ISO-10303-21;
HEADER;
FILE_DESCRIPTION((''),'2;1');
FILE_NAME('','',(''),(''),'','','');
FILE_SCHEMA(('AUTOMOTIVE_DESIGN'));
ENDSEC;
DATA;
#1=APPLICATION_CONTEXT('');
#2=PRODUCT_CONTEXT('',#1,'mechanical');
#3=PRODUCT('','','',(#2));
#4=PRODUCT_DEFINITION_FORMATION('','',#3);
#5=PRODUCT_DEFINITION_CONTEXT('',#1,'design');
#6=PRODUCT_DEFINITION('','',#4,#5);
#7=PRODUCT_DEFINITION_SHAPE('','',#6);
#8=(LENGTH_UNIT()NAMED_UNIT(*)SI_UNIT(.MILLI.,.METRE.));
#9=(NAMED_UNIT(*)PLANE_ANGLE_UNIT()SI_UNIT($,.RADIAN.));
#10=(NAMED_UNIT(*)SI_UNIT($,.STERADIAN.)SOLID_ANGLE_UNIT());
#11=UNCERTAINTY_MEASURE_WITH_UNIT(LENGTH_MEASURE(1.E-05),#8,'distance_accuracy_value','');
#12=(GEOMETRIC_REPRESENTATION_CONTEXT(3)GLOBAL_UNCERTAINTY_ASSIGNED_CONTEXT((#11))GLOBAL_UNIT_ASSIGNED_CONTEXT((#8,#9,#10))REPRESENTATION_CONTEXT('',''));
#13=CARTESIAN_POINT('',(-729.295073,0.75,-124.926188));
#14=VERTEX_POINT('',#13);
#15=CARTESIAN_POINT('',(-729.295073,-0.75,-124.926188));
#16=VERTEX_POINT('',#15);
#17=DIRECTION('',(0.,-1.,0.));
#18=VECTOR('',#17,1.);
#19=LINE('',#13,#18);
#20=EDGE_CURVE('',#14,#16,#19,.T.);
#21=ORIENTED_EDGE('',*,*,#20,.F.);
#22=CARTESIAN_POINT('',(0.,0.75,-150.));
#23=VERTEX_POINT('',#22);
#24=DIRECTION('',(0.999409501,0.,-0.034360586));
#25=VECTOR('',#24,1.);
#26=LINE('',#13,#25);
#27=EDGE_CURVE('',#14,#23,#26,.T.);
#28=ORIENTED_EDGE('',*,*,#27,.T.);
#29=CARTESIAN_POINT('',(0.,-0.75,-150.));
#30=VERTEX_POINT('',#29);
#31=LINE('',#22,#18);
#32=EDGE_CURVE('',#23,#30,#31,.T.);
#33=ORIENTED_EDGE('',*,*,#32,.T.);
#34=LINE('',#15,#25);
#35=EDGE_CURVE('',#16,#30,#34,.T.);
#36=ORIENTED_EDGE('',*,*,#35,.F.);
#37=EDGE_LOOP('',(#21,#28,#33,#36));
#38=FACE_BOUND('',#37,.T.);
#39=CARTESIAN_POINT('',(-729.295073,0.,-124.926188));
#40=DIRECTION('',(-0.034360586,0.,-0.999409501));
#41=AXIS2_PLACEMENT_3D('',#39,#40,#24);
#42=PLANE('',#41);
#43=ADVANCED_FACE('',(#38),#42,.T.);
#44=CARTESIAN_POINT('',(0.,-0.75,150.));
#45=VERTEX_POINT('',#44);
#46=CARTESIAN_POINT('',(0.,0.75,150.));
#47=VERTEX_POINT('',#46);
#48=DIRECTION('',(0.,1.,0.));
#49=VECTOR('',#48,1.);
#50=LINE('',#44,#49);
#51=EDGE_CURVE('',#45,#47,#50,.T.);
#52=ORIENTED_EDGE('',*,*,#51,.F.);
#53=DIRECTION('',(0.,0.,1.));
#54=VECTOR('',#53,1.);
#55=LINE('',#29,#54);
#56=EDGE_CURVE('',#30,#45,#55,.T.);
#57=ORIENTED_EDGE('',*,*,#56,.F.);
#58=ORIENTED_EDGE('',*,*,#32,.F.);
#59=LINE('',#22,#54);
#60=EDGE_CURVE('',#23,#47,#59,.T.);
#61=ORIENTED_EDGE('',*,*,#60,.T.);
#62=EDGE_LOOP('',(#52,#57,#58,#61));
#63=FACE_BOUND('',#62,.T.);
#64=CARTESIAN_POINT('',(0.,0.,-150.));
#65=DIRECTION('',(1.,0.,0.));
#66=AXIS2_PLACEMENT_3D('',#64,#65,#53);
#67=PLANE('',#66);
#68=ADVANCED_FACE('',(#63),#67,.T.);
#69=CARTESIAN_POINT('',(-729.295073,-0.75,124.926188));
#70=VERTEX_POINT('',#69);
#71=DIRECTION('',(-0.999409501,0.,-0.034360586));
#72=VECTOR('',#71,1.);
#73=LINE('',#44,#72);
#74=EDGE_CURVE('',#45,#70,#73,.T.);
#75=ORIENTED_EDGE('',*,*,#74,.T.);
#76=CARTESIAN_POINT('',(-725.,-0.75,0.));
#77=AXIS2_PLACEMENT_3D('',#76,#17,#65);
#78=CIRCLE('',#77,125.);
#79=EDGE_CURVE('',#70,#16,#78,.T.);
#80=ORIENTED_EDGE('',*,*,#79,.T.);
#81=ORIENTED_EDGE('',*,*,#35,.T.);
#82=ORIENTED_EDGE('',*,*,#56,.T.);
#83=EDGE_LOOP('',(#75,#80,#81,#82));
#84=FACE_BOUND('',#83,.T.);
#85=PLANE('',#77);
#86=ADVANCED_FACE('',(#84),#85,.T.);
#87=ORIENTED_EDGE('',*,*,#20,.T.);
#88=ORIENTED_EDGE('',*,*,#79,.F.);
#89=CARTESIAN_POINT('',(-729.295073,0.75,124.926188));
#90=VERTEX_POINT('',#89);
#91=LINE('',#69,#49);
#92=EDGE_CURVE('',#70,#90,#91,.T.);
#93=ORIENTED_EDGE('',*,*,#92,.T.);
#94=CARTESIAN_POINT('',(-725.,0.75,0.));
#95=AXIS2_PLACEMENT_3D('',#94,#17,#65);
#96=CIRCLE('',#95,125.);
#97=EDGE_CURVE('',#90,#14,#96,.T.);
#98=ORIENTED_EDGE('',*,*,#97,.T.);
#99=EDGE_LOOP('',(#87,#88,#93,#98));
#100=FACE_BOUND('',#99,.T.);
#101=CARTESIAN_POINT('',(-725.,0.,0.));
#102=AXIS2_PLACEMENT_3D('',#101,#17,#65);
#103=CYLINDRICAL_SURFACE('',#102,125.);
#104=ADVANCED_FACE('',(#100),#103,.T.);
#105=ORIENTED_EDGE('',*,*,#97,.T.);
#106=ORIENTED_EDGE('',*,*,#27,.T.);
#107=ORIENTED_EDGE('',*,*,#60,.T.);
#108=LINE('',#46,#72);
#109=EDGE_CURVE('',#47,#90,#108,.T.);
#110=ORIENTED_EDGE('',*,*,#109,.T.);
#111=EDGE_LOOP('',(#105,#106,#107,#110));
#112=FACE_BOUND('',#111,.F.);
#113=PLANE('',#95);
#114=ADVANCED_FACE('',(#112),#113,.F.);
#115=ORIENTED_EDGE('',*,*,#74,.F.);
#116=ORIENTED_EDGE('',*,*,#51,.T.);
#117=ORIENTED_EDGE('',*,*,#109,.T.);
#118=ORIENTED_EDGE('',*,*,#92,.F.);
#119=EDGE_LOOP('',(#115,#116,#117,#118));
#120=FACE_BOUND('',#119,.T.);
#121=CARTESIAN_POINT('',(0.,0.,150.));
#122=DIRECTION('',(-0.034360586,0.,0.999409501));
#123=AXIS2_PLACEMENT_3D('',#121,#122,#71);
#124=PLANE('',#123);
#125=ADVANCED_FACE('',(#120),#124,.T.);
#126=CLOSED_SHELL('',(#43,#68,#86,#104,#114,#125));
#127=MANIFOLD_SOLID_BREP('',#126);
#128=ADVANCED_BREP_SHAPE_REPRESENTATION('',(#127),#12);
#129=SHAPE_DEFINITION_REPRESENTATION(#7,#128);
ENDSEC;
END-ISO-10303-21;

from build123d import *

# Parameters (mm, degrees)
F1_DEPTH = 0.75


# Not quite as in the source:
# - a feature names something its author has since deleted; it is built from what else it names


with BuildPart() as f1:
    # F0 (on Front) → F1 (new body, symmetric)
    with BuildSketch(Plane.XZ):
        with BuildLine():
            ThreePointArc((-729.2950732942, -124.9261875885), (-638.1434635786, -89.8940603204), (-600, 0))
            ThreePointArc((-600, 0), (-638.1434635786, 89.8940603204), (-729.2950732942, 124.9261875885))
            ThreePointArc((-729.2950732942, 124.9261875885), (-850, 0), (-729.2950732942, -124.9261875885))
        make_face()
        with BuildLine():
            Line((0, 0), (-600, 0))
            ThreePointArc((-600, 0), (-638.1434635786, -89.8940603204), (-729.2950732942, -124.9261875885))
            Line((-729.2950732942, -124.9261875885), (0, -150))
            Line((0, -150), (0, 0))
        make_face()
        with BuildLine():
            ThreePointArc((-729.2950732942, 124.9261875885), (-638.1434635786, 89.8940603204), (-600, 0))
            Line((-600, 0), (0, 0))
            Line((0, 0), (0, 150))
            Line((0, 150), (-729.2950732942, 124.9261875885))
        make_face()
    extrude(amount=F1_DEPTH, both=True)


solid = f1.part
